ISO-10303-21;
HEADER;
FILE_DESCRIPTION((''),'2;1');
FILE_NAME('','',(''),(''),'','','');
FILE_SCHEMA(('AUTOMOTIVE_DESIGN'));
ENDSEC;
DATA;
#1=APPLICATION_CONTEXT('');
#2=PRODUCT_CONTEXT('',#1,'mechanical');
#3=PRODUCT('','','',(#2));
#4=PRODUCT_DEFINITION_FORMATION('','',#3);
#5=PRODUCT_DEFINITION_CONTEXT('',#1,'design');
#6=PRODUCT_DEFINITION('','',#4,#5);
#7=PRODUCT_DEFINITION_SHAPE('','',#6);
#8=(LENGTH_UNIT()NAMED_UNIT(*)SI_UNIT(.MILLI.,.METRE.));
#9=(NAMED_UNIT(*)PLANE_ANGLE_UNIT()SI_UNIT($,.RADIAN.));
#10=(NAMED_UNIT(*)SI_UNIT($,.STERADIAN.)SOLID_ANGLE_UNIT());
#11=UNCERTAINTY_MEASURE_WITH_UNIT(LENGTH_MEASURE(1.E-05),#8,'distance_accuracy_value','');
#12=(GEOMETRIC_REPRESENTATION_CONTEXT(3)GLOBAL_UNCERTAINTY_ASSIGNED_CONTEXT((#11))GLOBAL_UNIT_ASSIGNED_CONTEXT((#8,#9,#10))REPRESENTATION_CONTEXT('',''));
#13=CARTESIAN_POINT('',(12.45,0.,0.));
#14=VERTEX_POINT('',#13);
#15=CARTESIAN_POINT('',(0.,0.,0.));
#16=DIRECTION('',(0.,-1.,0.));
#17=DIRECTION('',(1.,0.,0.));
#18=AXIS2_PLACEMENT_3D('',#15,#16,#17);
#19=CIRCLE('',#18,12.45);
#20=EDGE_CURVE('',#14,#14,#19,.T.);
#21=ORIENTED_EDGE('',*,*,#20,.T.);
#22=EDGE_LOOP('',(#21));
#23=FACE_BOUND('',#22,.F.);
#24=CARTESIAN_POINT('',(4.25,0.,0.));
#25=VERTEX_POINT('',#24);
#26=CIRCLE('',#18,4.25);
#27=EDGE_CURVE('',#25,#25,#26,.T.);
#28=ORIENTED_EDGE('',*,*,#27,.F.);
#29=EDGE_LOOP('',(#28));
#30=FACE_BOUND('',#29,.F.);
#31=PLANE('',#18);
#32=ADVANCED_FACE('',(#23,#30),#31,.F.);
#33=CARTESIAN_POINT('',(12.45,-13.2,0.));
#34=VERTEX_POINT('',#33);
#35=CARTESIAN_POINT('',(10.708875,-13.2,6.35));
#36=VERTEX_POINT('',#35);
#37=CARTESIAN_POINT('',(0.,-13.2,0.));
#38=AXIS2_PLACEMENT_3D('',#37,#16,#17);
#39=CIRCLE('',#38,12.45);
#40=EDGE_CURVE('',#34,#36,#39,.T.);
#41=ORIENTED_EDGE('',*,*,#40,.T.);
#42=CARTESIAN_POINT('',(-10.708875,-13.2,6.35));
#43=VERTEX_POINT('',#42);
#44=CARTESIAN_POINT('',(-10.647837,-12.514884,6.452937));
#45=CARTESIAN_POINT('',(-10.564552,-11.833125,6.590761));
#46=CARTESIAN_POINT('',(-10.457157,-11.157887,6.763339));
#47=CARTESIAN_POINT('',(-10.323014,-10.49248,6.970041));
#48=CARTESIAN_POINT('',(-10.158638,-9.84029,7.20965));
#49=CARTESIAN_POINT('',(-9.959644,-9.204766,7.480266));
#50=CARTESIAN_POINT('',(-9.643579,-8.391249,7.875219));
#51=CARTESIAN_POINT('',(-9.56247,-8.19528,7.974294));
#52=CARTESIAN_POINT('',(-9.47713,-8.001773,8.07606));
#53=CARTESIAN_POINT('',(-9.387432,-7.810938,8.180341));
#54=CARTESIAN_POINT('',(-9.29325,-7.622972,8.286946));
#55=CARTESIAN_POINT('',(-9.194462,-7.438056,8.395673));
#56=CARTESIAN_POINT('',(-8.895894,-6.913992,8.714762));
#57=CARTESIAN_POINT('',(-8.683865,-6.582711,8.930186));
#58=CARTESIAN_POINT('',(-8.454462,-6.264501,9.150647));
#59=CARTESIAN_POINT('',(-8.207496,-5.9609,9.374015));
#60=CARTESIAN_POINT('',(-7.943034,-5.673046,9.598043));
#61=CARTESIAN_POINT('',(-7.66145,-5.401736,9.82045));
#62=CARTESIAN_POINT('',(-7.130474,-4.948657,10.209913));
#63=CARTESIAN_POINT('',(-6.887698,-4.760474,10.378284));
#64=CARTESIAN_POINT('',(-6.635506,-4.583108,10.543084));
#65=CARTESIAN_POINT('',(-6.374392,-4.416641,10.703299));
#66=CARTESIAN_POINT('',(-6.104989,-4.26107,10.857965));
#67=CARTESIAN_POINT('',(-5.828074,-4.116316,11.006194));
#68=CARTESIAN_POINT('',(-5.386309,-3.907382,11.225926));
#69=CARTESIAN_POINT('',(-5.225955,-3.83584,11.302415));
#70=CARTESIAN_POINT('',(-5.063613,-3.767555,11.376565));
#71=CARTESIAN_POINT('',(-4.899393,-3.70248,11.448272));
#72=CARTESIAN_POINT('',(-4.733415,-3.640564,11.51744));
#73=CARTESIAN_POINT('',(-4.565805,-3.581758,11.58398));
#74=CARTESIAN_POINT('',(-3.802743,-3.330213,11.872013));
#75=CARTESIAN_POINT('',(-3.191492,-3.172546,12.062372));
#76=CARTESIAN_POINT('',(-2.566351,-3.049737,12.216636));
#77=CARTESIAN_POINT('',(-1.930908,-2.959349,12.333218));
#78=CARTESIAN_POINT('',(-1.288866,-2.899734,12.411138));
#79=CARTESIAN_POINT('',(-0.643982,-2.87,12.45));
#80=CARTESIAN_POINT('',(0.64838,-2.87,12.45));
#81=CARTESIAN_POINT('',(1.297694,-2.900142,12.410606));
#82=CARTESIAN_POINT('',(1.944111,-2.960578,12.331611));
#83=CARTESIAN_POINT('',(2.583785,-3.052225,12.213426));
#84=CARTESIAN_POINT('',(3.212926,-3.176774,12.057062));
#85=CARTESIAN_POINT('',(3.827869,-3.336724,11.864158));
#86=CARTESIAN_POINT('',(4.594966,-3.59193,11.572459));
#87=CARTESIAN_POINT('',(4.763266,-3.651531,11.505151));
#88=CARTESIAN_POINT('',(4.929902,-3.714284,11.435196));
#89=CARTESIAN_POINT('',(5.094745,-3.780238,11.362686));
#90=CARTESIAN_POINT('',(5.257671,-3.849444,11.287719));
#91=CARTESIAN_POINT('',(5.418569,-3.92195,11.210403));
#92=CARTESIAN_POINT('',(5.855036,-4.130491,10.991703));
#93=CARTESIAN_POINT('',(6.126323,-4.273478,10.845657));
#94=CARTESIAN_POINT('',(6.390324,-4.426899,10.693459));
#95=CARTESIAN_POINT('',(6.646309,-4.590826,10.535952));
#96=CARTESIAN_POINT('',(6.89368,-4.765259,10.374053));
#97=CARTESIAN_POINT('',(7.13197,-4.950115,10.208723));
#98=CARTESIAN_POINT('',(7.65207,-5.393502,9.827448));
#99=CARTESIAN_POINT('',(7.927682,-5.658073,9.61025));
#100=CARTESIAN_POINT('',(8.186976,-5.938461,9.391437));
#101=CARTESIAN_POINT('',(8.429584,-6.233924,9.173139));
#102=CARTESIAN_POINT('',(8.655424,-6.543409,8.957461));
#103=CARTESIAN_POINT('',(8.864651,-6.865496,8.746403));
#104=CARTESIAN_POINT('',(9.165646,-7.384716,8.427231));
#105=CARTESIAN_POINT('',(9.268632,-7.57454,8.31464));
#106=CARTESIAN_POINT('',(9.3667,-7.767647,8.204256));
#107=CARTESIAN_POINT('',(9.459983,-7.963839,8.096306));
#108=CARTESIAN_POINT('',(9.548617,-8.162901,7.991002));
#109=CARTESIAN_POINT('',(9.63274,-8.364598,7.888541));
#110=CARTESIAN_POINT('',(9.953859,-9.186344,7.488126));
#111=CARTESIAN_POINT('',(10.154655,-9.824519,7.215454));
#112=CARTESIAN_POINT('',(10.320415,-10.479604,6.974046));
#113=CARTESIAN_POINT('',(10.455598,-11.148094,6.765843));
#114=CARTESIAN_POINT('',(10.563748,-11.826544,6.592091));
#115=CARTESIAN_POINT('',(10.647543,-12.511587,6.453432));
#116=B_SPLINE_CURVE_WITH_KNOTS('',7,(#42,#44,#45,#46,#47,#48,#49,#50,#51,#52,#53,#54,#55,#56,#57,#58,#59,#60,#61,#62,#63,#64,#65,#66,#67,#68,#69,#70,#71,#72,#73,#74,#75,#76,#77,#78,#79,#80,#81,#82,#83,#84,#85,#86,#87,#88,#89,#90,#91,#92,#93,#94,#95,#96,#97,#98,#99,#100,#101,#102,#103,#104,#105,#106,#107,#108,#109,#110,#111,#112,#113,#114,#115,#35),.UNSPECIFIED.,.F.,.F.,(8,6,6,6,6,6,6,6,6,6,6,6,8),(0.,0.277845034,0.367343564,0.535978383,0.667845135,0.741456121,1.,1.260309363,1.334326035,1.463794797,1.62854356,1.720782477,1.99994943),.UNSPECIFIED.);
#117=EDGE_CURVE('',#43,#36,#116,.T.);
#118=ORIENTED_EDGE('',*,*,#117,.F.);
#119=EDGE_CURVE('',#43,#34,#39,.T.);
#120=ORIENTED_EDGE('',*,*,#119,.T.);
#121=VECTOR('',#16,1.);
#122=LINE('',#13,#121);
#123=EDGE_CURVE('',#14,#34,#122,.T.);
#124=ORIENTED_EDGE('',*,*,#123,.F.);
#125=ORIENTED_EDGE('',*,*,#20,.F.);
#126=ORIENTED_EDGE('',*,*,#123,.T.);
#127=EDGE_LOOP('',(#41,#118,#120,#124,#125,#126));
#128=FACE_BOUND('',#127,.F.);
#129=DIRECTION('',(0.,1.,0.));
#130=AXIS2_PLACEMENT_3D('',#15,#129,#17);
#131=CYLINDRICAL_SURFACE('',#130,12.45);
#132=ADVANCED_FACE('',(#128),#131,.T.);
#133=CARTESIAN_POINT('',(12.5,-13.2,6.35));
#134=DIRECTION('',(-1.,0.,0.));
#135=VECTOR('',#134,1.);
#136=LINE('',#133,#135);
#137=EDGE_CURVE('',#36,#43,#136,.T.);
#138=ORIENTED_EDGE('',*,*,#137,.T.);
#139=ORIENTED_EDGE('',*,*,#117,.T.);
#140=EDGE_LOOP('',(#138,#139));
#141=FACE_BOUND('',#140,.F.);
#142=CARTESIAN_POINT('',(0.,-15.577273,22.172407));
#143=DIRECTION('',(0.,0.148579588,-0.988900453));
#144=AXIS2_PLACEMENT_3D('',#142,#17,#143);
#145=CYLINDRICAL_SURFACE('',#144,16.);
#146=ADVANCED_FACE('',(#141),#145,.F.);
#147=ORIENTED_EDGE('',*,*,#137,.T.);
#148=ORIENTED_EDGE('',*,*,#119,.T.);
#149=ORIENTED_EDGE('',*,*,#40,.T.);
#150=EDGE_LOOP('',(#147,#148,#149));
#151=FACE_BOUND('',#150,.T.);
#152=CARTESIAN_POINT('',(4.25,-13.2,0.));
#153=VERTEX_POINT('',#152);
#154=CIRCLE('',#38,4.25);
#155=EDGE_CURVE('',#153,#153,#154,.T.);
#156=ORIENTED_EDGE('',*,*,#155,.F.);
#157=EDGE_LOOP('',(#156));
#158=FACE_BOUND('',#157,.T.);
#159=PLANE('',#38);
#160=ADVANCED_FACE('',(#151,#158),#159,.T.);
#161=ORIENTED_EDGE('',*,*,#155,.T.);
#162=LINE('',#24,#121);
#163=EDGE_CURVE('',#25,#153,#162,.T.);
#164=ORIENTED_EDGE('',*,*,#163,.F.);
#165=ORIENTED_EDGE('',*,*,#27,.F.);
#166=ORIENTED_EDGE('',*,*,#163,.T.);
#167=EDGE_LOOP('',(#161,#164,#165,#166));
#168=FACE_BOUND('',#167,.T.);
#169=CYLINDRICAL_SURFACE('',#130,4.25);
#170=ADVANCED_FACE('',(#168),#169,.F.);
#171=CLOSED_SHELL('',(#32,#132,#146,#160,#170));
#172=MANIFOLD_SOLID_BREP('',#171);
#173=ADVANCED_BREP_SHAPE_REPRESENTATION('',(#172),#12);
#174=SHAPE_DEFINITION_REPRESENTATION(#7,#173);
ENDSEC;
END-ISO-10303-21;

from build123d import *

# Parameters (mm, degrees)
F0_R     = 12.45
F0_R_2   = 4.25
F1_DEPTH = 13.2
F3_DEPTH = 12.5


with BuildPart() as f1:
    # F0 (on Front) → F1 (new body)
    with BuildSketch(Plane.XZ):
        Circle(F0_R)
        Circle(F0_R_2, mode=Mode.SUBTRACT)
    extrude(amount=F1_DEPTH)

    # F2 (on Right) → F3 (cut, symmetric)
    with BuildSketch(Plane.YZ):
        with BuildLine():
            Line((-2.87, 12.45), (-13.2, 12.45))
            Line((-13.2, 12.45), (-13.2, 6.35))
            ThreePointArc((-13.2, 6.35), (-7.4416487749, 8.3951937451), (-2.87, 12.45))
        make_face()
    extrude(amount=F3_DEPTH, both=True, mode=Mode.SUBTRACT)


solid = f1.part
